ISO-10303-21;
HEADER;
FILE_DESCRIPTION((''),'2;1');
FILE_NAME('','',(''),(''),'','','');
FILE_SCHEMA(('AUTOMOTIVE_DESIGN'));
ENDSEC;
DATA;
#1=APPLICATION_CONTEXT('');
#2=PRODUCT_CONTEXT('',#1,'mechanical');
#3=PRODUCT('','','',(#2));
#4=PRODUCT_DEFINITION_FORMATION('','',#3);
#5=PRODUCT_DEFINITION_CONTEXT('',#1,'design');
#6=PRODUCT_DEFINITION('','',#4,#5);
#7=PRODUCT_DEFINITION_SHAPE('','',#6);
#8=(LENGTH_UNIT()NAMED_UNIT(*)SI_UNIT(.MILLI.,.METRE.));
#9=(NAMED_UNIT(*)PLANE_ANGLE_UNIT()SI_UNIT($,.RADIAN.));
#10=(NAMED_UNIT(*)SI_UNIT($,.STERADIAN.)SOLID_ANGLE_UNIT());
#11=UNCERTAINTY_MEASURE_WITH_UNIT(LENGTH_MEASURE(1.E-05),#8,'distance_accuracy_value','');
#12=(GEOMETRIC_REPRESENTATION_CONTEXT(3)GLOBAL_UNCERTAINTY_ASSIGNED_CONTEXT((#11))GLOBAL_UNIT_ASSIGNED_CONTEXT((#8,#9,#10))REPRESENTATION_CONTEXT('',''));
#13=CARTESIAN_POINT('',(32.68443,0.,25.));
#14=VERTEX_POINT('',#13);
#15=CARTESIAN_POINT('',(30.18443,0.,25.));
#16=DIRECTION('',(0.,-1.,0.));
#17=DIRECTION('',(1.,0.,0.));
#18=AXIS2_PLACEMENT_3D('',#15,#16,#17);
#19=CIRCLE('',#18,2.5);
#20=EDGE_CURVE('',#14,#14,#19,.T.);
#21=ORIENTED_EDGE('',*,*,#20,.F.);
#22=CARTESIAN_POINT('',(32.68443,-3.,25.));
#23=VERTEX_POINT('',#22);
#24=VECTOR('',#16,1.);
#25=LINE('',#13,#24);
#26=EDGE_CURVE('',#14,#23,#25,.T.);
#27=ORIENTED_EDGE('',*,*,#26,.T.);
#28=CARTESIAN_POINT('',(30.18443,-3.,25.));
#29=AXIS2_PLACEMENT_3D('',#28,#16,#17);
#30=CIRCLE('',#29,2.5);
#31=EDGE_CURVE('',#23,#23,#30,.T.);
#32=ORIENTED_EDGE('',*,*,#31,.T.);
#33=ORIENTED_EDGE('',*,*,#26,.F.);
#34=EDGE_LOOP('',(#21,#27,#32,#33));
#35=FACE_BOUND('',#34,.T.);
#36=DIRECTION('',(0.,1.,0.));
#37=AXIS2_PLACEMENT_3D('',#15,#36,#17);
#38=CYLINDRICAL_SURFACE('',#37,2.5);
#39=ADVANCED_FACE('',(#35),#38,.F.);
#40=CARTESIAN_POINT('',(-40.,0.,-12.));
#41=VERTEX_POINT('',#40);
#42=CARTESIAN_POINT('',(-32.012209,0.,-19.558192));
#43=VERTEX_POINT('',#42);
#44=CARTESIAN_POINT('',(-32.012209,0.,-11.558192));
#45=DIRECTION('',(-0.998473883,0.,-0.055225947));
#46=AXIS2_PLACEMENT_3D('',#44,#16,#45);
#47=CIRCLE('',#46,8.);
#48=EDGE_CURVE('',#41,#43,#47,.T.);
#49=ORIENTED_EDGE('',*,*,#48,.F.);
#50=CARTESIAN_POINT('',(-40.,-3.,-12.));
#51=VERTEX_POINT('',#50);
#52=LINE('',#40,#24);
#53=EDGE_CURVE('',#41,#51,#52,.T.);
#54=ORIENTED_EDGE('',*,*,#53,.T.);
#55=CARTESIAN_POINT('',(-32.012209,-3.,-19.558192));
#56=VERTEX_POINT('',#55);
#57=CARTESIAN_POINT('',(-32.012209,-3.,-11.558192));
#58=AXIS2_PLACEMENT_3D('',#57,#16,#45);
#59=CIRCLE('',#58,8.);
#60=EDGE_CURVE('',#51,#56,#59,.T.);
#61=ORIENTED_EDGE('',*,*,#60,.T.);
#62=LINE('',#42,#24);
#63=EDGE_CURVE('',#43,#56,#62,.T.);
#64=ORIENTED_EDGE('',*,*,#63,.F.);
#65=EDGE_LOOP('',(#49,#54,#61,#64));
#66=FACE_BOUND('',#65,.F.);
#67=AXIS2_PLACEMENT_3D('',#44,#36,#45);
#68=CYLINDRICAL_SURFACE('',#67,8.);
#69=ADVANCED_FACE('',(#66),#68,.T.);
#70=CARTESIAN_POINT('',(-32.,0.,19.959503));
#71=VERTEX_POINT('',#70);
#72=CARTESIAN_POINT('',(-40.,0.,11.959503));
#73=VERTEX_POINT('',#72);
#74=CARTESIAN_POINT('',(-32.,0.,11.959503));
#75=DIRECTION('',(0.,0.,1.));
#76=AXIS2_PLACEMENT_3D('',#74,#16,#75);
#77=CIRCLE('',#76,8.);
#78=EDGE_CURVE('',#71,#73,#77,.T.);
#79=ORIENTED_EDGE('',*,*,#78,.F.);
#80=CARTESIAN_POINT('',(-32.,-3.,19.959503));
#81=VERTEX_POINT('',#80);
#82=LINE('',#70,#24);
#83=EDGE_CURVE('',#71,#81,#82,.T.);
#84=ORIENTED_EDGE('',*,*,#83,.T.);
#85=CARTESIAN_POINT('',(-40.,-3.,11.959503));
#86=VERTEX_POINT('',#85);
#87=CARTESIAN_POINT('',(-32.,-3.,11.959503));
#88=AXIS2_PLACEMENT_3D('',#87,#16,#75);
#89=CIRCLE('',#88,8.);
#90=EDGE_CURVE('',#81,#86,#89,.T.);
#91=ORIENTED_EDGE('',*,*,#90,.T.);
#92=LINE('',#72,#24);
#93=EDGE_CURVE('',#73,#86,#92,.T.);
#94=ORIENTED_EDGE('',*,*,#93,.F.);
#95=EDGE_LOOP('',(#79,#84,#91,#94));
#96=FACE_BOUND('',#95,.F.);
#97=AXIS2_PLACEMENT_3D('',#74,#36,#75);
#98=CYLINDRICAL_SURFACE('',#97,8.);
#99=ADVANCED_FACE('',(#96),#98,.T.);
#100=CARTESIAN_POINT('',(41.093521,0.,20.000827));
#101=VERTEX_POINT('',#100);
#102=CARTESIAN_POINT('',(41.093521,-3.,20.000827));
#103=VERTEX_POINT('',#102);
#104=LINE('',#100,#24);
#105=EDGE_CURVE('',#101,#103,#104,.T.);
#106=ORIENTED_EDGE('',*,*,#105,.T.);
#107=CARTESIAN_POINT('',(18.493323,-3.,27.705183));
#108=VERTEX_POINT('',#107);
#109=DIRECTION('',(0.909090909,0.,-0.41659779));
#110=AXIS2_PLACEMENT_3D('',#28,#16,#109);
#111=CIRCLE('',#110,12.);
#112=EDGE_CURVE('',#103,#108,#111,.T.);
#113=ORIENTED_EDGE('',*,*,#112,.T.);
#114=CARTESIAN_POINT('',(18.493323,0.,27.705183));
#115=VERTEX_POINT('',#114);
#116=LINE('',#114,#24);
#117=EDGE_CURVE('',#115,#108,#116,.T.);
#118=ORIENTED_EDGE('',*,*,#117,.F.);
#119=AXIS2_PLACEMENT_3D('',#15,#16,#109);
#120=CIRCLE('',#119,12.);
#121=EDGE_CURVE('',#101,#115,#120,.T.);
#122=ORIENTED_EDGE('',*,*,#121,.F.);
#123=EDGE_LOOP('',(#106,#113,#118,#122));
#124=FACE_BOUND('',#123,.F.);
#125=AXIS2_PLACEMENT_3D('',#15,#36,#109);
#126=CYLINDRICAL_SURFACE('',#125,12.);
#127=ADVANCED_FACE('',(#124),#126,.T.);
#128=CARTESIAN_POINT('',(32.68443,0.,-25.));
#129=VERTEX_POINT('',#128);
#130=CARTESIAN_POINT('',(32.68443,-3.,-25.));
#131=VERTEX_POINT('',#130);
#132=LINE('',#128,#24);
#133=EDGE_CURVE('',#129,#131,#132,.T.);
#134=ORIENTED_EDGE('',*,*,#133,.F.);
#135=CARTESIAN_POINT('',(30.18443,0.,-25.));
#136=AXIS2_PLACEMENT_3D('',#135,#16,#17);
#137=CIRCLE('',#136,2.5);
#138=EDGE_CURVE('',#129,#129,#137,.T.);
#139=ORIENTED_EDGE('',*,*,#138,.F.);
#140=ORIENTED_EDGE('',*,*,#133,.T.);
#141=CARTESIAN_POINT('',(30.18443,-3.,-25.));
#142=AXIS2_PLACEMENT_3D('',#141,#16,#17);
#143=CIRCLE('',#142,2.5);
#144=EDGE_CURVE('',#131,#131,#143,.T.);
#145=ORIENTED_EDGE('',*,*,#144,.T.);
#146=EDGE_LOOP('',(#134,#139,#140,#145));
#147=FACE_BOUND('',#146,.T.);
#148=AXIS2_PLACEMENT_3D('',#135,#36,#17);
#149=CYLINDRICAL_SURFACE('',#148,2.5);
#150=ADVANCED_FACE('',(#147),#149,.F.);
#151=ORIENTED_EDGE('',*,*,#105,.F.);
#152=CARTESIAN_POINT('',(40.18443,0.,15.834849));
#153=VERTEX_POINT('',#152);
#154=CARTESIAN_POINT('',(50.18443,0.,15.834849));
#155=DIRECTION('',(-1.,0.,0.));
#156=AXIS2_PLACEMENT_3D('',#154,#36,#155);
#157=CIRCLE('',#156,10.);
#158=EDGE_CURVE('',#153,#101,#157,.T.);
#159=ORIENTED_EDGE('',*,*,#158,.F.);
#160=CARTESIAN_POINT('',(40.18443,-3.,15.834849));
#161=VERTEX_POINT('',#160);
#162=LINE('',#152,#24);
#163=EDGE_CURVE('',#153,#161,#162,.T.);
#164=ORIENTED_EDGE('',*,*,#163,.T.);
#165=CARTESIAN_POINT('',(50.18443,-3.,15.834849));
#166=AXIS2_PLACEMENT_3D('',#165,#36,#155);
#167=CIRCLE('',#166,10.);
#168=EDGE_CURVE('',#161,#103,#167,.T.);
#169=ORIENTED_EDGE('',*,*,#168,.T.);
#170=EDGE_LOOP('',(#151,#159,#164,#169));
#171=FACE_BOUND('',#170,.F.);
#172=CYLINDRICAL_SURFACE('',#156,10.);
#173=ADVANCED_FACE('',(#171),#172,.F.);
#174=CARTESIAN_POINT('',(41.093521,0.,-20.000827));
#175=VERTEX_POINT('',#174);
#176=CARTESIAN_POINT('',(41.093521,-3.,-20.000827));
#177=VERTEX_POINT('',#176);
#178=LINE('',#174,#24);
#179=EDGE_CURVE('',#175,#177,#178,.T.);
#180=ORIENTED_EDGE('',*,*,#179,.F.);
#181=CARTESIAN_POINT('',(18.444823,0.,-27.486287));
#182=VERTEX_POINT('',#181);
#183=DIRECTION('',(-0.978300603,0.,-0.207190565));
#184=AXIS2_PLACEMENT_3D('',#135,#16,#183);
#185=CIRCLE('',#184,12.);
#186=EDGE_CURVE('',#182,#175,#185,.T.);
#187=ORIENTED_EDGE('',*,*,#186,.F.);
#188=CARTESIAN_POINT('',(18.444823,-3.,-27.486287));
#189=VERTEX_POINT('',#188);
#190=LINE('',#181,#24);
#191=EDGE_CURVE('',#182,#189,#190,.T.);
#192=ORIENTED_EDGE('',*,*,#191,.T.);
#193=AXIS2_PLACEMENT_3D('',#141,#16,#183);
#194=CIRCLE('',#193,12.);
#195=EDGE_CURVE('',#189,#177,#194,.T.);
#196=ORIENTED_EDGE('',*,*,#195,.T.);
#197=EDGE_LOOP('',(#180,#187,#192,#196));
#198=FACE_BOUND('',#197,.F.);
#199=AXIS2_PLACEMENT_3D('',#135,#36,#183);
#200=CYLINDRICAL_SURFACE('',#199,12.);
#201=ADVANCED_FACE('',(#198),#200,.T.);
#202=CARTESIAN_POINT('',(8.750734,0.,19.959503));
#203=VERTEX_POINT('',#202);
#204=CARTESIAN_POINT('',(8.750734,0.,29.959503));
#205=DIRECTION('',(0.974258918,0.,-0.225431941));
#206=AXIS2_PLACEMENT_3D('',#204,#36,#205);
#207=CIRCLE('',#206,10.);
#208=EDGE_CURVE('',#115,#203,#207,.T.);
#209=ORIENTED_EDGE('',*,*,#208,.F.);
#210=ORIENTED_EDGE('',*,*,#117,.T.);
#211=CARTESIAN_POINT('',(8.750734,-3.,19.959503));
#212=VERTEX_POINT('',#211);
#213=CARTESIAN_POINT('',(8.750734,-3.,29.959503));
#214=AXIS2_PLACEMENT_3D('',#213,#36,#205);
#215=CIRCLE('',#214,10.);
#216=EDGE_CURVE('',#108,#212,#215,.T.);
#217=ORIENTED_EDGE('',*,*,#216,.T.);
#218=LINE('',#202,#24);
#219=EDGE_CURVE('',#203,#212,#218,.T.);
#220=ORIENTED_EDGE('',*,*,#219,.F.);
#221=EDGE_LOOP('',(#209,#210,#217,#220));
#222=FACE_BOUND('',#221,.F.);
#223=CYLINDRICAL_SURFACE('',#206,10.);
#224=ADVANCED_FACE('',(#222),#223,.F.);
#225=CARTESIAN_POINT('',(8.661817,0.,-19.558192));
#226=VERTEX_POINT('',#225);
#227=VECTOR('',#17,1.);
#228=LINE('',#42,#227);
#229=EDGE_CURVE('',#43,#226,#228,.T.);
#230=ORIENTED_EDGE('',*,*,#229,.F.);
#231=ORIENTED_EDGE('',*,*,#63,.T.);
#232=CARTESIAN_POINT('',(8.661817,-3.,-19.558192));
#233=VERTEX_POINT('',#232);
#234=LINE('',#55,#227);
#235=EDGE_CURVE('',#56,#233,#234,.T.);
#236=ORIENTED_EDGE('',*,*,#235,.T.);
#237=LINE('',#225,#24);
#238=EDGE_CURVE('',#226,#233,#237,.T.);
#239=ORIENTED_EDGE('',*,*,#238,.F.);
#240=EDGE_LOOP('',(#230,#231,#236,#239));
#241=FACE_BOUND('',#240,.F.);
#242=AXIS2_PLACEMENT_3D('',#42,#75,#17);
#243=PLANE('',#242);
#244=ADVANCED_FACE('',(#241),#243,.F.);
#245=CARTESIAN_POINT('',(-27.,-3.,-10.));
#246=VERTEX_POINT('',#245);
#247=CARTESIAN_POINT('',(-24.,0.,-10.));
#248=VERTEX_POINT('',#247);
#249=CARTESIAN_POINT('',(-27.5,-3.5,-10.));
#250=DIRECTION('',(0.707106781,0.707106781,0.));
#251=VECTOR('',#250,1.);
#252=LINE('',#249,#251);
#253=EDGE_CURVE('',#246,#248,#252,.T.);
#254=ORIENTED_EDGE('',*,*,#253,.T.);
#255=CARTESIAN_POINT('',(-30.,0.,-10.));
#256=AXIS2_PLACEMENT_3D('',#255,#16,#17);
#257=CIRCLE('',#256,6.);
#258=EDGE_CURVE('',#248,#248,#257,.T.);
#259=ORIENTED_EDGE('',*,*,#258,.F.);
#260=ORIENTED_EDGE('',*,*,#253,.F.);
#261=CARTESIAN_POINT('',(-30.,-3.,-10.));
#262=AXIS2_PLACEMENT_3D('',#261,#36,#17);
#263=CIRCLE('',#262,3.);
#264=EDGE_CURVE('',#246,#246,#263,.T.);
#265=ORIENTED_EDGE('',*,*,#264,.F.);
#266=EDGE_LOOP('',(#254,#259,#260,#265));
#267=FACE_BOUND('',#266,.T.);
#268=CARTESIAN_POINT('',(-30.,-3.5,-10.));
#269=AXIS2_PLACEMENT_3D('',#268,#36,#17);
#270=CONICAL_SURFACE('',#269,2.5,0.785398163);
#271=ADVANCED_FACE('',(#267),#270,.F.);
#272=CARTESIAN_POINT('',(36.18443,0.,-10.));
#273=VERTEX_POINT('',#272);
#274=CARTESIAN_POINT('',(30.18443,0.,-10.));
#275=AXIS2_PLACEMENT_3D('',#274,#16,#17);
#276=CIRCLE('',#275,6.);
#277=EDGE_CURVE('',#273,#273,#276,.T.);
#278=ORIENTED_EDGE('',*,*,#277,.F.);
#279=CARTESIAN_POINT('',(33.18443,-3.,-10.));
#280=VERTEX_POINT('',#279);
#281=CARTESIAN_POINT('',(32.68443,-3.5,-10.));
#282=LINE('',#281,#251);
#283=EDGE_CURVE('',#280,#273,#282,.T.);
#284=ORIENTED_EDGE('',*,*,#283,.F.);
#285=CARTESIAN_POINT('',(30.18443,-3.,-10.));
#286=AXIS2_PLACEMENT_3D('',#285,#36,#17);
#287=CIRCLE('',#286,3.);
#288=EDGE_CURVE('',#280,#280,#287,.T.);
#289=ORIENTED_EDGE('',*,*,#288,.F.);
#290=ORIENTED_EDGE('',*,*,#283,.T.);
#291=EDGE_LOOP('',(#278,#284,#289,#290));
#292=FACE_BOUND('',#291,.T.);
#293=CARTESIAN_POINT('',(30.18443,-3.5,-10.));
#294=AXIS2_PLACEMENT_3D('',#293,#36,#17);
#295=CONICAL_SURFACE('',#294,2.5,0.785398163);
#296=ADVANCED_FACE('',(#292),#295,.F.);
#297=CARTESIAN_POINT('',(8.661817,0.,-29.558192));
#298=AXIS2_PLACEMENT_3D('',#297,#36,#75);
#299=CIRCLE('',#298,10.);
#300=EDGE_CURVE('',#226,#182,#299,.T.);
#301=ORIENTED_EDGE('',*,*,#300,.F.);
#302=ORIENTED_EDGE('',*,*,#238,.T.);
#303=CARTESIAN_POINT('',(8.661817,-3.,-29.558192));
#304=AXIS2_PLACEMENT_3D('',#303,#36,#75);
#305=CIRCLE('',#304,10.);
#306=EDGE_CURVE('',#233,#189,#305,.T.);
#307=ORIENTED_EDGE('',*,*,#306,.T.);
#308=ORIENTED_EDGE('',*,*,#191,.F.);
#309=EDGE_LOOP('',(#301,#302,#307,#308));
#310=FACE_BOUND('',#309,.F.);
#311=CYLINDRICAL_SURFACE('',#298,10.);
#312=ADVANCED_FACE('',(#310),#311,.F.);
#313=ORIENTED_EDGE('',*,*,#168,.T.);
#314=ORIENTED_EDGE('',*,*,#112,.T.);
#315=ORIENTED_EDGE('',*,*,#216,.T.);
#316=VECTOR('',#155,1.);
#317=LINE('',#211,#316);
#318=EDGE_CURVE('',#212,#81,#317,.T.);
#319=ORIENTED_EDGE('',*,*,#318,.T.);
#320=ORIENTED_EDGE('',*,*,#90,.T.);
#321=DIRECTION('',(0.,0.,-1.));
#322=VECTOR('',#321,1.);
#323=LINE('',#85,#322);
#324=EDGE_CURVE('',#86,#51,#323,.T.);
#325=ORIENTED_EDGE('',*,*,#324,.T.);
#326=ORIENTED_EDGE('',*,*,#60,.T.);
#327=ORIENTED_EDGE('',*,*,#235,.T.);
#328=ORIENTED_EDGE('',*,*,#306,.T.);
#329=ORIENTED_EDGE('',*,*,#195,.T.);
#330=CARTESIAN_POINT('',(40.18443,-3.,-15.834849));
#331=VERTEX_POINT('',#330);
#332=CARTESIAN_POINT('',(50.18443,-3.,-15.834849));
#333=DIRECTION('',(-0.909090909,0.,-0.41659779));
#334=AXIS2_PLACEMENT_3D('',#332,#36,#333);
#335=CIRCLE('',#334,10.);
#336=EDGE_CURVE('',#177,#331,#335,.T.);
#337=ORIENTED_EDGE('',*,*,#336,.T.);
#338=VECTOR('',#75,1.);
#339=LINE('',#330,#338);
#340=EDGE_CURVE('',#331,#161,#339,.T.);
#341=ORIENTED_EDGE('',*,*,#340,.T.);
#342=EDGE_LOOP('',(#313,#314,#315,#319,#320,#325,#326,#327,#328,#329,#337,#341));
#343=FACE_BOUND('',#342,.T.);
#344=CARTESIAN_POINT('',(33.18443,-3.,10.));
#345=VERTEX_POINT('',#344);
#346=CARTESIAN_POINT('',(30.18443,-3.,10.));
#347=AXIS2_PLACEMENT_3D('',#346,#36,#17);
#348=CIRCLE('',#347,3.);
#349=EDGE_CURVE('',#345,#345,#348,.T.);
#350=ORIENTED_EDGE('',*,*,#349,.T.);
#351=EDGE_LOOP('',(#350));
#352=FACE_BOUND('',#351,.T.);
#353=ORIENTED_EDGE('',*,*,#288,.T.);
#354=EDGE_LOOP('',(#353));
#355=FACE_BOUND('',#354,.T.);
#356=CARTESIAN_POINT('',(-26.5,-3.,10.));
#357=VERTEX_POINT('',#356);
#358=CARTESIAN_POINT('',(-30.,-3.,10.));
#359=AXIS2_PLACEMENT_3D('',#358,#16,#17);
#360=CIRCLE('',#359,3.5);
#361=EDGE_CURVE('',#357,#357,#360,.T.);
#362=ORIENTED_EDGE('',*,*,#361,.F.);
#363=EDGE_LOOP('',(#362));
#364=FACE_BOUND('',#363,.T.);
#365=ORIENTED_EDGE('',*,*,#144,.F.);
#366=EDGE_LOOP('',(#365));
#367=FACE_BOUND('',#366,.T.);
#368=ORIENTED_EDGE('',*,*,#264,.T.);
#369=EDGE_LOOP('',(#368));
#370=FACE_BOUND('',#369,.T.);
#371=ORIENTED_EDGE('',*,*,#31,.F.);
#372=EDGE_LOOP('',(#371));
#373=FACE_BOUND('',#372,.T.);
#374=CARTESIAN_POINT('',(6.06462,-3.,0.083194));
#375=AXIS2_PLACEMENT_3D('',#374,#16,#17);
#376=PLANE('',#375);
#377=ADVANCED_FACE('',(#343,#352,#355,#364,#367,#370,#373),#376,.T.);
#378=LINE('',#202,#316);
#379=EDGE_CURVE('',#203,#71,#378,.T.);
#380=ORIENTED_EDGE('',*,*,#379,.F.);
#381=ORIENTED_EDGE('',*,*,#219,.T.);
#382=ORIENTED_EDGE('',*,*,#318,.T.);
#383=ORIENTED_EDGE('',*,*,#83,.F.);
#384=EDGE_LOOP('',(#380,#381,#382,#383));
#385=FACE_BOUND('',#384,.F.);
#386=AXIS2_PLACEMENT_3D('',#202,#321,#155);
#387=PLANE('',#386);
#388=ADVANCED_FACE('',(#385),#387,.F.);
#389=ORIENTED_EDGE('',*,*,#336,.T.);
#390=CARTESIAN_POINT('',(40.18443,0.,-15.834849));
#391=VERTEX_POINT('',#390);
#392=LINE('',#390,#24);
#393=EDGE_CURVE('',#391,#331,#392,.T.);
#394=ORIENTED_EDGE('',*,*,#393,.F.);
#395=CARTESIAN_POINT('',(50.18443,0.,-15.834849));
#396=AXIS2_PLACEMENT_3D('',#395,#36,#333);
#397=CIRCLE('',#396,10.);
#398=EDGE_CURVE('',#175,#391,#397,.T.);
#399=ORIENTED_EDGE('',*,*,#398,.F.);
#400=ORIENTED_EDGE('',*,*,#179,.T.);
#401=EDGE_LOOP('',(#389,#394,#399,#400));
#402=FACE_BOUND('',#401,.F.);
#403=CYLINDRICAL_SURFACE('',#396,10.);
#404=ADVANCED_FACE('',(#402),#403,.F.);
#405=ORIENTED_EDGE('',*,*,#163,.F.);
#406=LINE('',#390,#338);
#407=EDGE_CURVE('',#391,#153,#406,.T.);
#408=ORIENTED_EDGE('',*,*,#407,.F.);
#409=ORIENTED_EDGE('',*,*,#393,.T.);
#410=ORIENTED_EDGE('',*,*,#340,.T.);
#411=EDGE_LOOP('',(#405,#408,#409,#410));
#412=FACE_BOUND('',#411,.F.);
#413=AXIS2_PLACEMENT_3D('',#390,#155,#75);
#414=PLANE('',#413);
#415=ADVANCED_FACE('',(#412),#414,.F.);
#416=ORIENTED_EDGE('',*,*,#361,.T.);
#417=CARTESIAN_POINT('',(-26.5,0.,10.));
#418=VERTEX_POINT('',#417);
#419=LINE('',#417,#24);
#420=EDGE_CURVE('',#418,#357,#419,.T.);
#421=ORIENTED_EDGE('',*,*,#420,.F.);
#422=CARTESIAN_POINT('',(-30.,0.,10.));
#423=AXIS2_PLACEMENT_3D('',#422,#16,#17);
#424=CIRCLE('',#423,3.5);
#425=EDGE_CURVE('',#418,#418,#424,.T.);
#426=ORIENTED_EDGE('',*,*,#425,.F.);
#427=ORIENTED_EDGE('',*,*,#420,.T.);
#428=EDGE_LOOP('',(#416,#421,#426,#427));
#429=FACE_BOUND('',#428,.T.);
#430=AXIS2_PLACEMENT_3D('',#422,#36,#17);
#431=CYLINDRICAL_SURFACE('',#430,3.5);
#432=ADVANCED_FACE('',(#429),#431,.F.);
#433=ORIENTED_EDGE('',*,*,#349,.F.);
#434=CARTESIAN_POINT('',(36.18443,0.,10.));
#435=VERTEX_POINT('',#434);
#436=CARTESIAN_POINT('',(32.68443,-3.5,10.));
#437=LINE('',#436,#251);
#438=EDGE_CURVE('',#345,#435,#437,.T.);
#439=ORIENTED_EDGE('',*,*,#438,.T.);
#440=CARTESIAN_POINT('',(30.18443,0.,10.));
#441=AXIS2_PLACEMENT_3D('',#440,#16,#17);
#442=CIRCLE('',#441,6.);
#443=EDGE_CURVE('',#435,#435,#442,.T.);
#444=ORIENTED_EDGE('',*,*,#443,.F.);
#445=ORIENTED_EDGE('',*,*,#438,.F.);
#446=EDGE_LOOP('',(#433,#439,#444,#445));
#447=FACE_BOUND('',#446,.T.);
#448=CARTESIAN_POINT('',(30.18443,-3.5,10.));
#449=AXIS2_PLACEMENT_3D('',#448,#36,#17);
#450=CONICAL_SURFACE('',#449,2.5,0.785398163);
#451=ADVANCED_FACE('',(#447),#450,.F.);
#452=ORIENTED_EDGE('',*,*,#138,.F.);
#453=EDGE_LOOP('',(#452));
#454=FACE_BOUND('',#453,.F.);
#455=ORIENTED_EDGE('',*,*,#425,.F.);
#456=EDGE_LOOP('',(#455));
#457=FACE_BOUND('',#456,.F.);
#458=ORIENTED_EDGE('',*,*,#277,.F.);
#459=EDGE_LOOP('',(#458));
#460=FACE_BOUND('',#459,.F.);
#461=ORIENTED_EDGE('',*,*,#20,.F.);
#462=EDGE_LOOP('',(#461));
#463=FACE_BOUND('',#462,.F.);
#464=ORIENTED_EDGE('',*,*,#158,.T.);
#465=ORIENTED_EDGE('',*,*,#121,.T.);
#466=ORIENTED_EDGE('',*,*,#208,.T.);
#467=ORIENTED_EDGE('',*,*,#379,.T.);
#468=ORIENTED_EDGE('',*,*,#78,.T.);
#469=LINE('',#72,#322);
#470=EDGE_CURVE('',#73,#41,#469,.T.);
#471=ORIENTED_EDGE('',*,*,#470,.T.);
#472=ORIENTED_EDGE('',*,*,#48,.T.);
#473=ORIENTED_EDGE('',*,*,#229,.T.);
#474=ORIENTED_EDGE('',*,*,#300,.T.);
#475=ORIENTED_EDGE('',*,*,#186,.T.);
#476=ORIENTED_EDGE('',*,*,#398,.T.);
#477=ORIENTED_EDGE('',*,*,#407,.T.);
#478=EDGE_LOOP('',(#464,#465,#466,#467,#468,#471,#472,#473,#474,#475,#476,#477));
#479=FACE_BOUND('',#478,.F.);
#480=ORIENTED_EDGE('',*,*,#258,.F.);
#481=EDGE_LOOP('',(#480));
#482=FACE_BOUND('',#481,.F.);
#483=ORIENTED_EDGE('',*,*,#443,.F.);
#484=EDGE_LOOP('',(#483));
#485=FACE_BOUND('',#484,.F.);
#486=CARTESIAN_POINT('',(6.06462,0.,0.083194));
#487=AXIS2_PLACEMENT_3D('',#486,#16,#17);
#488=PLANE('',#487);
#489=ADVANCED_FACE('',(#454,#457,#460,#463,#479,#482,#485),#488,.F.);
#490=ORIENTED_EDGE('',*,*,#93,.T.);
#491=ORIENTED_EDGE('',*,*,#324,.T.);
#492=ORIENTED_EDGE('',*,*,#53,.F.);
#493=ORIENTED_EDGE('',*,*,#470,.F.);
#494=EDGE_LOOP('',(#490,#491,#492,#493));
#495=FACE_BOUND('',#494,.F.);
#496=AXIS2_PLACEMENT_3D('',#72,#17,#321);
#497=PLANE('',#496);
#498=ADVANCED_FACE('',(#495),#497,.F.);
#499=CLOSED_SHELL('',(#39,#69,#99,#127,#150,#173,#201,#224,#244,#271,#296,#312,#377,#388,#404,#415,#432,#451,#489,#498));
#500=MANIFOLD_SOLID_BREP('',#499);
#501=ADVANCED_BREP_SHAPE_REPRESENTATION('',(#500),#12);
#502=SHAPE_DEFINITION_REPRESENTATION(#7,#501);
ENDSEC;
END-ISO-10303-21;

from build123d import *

# Parameters (mm, degrees)
F0_R     = 2.5
F0_R_2   = 3.5
F1_DEPTH = 3


# Not quite as in the source:
# - a fillet or chamfer that OpenCascade refuses, or shapes differently, is made with other operations: its cross-section is extruded or revolved along the edge and cut away or added


with BuildPart() as f1:
    # F0 (on Front) → F1 (new body)
    with BuildSketch(Plane.XZ):
        with BuildLine():
            ThreePointArc((8.6618165432, -19.5581924259), (14.9578845034, -21.7890529471), (18.4448225733, -27.4862867778))
            ThreePointArc((18.4448225733, -27.4862867778), (33.9501260505, -36.3938374492), (41.0935207185, -20.0008265146))
            ThreePointArc((41.0935207185, -20.0008265146), (40.4143456003, -17.9668557736), (40.1844298095, -15.8348486101))
            Line((40.1844298095, -15.8348486101), (40.1844298095, 15.8348486101))
            ThreePointArc((40.1844298095, 15.8348486101), (40.4143456003, 17.9668557736), (41.0935207185, 20.0008265146))
            ThreePointArc((41.0935207185, 20.0008265146), (34.0564016131, 36.3581615745), (18.4933227899, 27.7051832948))
            ThreePointArc((18.4933227899, 27.7051832948), (14.9739484465, 22.1318851219), (8.750733607, 19.9595027072))
            Line((8.750733607, 19.9595027072), (-32, 19.9595027072))
            ThreePointArc((-32, 19.9595027072), (-37.6568542495, 17.6163569566), (-40, 11.9595027072))
            Line((-40, 11.9595027072), (-40, -12))
            ThreePointArc((-40, -12), (-37.5106423232, -17.3691502038), (-32.0122089369, -19.5581924259))
            Line((-32.0122089369, -19.5581924259), (8.6618165432, -19.5581924259))
        make_face()
        with Locations((-30, -10)):
            Circle(F0_R, mode=Mode.SUBTRACT)
        with Locations((30.1844298095, -25)):
            Circle(F0_R, mode=Mode.SUBTRACT)
        with Locations((30.1844298095, -10)):
            Circle(F0_R, mode=Mode.SUBTRACT)
        with Locations((-30, 10)):
            Circle(F0_R_2, mode=Mode.SUBTRACT)
        with Locations((30.1844298095, 10)):
            Circle(F0_R, mode=Mode.SUBTRACT)
        with Locations((30.1844298095, 25)):
            Circle(F0_R, mode=Mode.SUBTRACT)
    extrude(amount=F1_DEPTH)

    # F2: chamfer of 3.5 on 3 edges, made by hand

    # F2_s1 → F2_t2 (revolve, cut)
    with BuildSketch(Plane.XY.offset(10)):
        Polygon((32.6844298095, -3.5), (36.1844298095, 0), (32.6844298095, 0), align=None)
    revolve(axis=Axis((30.1844298095, 0, 10), (0, -1, 0)), mode=Mode.SUBTRACT)

    # F2_s3 → F2_t4 (revolve, cut)
    with BuildSketch(Plane.XY.offset(-10)):
        Polygon((32.6844298095, -3.5), (36.1844298095, 0), (32.6844298095, 0), align=None)
    revolve(axis=Axis((30.1844298095, 0, -10), (0, -1, 0)), mode=Mode.SUBTRACT)

    # F2_s5 → F2_t6 (revolve, cut)
    with BuildSketch(Plane.XY.offset(-10)):
        Polygon((-27.5, -3.5), (-24, 0), (-27.5, 0), align=None)
    revolve(axis=Axis((-30, 0, -10), (0, -1, 0)), mode=Mode.SUBTRACT)


solid = f1.part
